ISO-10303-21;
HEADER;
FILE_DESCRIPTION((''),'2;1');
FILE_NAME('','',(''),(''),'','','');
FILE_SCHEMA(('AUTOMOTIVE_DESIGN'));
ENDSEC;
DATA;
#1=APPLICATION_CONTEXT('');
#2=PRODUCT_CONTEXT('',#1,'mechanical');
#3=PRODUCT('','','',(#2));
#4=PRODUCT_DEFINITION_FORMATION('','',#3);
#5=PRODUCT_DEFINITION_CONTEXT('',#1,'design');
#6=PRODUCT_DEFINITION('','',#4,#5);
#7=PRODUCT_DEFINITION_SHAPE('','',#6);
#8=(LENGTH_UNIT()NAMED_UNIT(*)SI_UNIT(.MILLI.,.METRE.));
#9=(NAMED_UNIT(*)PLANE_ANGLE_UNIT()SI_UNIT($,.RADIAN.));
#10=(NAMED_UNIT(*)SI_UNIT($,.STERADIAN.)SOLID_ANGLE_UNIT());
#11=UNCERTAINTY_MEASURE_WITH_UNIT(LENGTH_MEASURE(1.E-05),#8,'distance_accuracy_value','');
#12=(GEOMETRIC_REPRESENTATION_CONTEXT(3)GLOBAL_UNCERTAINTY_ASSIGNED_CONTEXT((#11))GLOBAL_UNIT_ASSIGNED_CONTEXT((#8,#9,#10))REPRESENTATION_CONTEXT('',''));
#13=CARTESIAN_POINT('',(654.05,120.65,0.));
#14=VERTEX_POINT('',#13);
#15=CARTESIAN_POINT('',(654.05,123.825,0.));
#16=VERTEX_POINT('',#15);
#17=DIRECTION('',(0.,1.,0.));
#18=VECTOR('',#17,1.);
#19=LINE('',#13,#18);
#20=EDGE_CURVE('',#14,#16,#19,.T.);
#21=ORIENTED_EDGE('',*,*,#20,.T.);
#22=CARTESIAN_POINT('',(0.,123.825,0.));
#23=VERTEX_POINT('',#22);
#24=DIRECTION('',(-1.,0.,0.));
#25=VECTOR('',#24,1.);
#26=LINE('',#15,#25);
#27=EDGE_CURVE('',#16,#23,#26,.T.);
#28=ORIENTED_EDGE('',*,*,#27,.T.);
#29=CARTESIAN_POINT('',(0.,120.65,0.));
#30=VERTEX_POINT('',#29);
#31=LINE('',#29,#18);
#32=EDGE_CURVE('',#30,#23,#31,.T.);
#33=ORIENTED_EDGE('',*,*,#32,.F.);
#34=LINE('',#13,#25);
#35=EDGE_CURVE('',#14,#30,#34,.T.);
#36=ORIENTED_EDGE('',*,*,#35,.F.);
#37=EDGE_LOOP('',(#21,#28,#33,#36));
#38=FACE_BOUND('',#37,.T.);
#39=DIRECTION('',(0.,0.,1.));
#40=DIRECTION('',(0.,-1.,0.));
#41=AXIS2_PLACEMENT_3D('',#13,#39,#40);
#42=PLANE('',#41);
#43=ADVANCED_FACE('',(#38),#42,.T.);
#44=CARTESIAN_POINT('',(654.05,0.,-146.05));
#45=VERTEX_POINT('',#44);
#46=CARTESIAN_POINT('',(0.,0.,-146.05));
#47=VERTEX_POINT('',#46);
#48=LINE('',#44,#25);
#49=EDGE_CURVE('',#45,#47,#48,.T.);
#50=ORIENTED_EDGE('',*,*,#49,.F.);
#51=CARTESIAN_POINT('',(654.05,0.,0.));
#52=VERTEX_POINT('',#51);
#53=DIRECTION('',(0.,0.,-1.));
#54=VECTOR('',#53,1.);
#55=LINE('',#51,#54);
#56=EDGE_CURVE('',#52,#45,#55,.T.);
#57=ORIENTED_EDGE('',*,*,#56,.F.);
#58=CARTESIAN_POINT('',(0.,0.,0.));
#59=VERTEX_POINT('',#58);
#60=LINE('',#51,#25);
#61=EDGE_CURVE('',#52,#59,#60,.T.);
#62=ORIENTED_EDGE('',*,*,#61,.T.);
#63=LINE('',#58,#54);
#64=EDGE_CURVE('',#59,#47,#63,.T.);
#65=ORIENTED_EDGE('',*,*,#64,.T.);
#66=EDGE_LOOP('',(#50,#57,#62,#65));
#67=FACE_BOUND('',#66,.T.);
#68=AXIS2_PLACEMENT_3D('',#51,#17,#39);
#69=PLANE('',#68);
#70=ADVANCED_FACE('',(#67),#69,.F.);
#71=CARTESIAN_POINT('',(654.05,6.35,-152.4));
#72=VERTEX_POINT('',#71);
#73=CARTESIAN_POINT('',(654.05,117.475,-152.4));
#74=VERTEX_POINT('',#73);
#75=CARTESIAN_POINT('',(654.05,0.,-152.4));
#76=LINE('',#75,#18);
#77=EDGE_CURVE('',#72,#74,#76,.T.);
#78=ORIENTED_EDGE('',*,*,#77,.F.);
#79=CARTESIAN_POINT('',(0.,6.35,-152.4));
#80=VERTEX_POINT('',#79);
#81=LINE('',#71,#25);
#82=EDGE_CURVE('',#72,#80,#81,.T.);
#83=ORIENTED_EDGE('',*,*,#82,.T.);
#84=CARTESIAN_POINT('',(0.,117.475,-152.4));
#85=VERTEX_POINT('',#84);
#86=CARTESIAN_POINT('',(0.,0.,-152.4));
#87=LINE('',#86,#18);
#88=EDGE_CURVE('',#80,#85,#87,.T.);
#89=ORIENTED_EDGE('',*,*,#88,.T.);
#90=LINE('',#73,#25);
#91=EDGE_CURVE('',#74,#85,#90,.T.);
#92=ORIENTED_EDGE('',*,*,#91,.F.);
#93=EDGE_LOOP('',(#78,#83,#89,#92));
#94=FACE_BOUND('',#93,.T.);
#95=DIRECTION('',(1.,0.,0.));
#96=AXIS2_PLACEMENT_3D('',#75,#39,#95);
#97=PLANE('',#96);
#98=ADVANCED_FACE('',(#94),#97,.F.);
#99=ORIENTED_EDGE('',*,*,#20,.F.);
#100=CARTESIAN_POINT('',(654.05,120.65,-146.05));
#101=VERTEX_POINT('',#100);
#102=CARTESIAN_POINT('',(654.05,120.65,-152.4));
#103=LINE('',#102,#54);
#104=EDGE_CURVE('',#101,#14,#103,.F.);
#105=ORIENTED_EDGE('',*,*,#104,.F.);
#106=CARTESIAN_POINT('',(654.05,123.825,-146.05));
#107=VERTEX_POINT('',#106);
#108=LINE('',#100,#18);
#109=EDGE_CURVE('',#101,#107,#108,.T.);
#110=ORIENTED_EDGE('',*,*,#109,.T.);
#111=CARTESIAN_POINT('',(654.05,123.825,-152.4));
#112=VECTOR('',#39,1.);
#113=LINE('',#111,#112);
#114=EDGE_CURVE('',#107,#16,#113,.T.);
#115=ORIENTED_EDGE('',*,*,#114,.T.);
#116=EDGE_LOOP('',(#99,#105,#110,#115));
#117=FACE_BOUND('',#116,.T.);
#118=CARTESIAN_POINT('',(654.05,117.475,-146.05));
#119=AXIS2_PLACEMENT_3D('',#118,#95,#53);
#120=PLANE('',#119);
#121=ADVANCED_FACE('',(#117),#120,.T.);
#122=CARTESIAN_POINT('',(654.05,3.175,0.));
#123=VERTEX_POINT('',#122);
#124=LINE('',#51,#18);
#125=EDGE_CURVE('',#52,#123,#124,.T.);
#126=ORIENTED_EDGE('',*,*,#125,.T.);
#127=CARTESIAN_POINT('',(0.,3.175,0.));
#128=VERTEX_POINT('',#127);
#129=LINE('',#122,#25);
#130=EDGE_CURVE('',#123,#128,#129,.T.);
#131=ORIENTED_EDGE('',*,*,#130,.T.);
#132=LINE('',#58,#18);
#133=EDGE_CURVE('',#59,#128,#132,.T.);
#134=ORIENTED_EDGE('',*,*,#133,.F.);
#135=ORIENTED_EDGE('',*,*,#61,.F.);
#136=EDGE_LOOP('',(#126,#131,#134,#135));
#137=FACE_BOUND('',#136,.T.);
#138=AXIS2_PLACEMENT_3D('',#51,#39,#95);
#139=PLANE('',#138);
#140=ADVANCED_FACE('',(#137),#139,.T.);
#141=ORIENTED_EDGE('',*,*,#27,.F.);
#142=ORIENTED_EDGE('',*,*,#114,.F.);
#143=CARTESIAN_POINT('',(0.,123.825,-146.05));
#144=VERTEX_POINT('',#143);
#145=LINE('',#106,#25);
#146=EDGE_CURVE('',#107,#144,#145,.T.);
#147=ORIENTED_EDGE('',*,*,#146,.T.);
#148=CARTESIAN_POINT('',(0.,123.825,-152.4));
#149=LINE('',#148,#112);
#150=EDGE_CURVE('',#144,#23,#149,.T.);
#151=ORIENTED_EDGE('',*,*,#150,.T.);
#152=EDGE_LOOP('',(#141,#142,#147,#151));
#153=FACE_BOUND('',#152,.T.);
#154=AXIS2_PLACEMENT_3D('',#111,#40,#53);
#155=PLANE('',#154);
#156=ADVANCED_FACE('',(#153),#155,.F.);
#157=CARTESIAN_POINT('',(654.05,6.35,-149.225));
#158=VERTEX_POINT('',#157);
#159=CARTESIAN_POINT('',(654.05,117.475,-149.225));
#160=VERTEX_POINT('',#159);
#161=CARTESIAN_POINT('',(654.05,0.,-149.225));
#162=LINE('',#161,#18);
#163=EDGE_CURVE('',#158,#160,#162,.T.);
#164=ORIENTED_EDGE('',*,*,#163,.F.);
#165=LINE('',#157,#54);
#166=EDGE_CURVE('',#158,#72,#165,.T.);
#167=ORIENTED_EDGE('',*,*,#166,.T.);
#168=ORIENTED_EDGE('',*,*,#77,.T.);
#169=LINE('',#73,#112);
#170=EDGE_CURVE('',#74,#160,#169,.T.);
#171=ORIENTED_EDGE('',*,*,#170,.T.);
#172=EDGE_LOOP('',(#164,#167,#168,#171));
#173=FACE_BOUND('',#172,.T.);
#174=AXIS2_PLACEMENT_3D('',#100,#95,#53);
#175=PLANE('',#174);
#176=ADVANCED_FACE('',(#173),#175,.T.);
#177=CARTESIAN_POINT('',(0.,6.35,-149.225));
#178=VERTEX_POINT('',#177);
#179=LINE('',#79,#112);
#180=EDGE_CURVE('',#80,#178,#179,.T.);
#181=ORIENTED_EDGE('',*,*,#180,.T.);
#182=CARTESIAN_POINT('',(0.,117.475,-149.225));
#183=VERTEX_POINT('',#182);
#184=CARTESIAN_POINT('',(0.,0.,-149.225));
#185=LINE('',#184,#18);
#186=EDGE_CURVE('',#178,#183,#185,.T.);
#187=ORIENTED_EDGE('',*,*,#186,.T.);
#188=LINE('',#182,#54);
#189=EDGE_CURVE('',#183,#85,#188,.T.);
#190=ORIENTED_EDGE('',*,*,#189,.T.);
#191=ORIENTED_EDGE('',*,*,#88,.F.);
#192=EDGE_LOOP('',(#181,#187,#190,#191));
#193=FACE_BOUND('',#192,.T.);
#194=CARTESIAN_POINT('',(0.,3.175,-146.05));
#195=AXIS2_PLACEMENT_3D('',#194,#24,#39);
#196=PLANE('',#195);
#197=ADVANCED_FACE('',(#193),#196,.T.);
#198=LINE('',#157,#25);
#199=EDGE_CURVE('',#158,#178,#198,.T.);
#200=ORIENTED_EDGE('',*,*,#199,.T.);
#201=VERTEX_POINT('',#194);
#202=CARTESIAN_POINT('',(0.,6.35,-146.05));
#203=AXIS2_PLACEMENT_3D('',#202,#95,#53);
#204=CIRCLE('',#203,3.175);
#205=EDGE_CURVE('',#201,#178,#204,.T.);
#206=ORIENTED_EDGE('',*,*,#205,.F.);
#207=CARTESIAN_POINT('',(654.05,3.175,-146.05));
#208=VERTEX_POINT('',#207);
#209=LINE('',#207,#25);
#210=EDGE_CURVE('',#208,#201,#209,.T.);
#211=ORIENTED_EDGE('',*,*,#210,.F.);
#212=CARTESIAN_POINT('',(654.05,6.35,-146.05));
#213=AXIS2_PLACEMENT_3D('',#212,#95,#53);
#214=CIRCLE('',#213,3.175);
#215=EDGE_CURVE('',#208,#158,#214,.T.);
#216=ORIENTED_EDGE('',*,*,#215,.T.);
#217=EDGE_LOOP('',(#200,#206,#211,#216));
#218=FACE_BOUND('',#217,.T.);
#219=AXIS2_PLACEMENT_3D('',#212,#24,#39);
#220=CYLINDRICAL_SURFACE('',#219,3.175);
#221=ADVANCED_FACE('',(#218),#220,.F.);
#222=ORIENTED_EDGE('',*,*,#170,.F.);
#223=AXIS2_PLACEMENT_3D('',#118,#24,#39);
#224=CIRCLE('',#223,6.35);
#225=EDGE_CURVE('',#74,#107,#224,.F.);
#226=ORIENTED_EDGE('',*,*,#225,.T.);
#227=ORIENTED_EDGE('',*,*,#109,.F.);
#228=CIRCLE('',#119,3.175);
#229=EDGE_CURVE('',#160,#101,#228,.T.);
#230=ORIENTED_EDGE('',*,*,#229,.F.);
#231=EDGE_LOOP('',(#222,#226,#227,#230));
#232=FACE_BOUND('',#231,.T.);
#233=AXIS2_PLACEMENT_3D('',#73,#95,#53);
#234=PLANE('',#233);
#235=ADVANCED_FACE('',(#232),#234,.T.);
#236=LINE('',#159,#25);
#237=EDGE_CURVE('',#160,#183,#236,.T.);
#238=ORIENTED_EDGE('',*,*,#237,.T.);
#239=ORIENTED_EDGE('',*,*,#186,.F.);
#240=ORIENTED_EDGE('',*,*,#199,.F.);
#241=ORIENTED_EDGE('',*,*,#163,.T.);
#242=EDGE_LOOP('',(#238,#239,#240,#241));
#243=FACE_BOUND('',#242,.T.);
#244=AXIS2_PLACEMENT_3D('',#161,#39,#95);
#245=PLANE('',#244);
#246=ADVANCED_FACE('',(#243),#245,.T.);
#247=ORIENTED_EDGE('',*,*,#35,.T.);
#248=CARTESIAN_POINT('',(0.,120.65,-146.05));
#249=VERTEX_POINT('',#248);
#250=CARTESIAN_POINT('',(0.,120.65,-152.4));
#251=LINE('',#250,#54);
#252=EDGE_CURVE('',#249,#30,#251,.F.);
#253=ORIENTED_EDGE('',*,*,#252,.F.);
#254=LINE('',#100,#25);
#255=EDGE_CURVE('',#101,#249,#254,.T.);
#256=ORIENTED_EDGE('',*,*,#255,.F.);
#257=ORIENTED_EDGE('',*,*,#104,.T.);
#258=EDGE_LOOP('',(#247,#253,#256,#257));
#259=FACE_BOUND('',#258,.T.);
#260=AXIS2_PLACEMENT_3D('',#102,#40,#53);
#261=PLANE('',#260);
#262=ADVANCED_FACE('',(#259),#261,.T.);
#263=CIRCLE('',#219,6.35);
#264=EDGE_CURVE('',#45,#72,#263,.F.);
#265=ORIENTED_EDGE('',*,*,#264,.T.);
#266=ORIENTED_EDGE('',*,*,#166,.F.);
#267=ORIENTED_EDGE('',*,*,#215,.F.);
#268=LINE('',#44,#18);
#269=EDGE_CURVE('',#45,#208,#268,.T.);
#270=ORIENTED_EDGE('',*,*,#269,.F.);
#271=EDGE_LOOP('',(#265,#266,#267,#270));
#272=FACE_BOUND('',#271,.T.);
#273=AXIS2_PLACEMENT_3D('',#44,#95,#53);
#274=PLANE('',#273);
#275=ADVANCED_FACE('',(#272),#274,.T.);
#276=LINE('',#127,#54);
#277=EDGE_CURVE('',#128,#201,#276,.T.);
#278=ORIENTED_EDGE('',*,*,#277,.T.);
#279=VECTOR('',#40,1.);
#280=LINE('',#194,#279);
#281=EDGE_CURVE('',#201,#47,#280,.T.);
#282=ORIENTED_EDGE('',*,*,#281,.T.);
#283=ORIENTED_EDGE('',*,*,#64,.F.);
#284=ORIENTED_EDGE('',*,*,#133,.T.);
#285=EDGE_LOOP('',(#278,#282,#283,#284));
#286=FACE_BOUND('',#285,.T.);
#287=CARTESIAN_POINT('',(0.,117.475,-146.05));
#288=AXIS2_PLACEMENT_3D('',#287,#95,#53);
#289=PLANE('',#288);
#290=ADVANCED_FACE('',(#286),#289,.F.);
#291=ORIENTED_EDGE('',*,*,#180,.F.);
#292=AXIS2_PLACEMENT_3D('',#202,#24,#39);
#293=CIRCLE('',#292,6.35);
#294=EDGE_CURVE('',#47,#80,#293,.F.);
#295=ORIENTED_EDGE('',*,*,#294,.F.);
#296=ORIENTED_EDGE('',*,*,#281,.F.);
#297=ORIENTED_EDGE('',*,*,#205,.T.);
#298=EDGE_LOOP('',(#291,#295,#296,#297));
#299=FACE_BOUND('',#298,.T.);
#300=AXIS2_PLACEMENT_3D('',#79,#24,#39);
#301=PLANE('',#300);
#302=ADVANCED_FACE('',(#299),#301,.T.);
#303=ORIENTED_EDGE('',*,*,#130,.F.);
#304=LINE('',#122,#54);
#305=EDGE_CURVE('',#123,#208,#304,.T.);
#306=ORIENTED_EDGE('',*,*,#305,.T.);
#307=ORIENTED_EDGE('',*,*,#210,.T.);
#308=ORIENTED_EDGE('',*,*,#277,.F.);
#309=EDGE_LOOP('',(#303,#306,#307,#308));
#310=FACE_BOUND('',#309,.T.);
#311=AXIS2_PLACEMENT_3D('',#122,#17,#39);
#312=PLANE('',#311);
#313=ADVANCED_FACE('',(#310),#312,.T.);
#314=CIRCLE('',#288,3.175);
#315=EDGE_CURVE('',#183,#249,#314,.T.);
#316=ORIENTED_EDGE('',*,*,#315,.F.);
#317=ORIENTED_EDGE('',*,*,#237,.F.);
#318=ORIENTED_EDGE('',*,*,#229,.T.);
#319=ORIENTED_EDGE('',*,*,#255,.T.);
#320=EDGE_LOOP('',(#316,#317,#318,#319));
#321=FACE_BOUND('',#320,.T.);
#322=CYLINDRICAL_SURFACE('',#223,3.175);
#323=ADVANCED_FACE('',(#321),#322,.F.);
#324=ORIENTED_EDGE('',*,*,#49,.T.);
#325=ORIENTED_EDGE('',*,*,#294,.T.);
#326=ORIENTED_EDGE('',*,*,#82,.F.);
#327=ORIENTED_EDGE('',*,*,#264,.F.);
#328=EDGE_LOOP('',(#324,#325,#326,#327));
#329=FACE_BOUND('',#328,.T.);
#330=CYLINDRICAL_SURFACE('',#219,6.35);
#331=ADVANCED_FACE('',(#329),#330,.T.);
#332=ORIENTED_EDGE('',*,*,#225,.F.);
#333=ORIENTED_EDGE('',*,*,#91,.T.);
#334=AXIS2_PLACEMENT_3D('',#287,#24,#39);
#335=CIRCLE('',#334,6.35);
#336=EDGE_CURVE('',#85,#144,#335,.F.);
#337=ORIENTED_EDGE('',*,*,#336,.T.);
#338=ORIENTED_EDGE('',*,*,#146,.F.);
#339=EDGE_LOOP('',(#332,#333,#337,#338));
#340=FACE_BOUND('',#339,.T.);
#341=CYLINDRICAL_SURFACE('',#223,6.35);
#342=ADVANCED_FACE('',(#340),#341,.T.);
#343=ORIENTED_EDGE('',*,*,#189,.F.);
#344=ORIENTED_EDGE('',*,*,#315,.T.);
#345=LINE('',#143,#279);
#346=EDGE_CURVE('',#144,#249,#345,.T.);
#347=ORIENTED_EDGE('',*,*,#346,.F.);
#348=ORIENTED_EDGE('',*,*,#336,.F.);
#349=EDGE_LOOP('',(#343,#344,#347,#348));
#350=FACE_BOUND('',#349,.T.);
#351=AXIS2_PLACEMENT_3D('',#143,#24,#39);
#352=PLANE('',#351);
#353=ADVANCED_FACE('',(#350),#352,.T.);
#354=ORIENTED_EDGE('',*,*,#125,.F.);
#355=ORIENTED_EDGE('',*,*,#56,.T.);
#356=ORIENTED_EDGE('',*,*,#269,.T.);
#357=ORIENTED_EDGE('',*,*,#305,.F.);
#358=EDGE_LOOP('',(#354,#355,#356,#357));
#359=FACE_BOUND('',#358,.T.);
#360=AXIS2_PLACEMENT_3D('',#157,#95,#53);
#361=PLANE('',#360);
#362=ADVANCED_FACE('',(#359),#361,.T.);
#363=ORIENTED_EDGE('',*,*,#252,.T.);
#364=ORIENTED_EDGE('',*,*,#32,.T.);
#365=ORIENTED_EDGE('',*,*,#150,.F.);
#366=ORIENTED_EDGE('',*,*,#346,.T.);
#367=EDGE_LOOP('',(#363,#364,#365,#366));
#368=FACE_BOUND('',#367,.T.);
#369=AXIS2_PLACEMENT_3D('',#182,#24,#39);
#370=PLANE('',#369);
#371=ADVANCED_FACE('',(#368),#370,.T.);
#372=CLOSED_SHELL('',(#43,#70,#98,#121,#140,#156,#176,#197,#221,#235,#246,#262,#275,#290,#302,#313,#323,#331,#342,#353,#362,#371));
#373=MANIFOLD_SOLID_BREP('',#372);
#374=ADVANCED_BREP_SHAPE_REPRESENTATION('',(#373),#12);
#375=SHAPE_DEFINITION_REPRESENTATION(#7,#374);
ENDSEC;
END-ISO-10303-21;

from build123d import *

# Parameters (mm, degrees)
BASE_FLANGE1_DEPTH = 654.05


# Sheet-metal steps are written as plain solids
with BuildPart() as part:
    # Sketch1 → Base-Flange1 (new body)
    with BuildSketch(Plane(origin=(0, 0, 0), x_dir=(0, 0, -1), z_dir=(1, 0, 0))):
        with BuildLine():
            Line((0, 0), (146.05, 0))
            ThreePointArc((146.05, 0), (150.540128061, 1.859871939), (152.4, 6.35))
            Line((152.4, 6.35), (152.4, 117.475))
            ThreePointArc((152.4, 117.475), (150.540128061, 121.965128061), (146.05, 123.825))
            Line((146.05, 123.825), (0, 123.825))
            Line((0, 123.825), (0, 120.65))
            Line((0, 120.65), (146.05, 120.65))
            ThreePointArc((146.05, 120.65), (148.29506403, 119.72006403), (149.225, 117.475))
            Line((149.225, 117.475), (149.225, 6.35))
            ThreePointArc((149.225, 6.35), (148.29506403, 4.10493597), (146.05, 3.175))
            Line((146.05, 3.175), (0, 3.175))
            Line((0, 3.175), (0, 0))
        make_face()
    extrude(amount=BASE_FLANGE1_DEPTH)


solid = part.part
